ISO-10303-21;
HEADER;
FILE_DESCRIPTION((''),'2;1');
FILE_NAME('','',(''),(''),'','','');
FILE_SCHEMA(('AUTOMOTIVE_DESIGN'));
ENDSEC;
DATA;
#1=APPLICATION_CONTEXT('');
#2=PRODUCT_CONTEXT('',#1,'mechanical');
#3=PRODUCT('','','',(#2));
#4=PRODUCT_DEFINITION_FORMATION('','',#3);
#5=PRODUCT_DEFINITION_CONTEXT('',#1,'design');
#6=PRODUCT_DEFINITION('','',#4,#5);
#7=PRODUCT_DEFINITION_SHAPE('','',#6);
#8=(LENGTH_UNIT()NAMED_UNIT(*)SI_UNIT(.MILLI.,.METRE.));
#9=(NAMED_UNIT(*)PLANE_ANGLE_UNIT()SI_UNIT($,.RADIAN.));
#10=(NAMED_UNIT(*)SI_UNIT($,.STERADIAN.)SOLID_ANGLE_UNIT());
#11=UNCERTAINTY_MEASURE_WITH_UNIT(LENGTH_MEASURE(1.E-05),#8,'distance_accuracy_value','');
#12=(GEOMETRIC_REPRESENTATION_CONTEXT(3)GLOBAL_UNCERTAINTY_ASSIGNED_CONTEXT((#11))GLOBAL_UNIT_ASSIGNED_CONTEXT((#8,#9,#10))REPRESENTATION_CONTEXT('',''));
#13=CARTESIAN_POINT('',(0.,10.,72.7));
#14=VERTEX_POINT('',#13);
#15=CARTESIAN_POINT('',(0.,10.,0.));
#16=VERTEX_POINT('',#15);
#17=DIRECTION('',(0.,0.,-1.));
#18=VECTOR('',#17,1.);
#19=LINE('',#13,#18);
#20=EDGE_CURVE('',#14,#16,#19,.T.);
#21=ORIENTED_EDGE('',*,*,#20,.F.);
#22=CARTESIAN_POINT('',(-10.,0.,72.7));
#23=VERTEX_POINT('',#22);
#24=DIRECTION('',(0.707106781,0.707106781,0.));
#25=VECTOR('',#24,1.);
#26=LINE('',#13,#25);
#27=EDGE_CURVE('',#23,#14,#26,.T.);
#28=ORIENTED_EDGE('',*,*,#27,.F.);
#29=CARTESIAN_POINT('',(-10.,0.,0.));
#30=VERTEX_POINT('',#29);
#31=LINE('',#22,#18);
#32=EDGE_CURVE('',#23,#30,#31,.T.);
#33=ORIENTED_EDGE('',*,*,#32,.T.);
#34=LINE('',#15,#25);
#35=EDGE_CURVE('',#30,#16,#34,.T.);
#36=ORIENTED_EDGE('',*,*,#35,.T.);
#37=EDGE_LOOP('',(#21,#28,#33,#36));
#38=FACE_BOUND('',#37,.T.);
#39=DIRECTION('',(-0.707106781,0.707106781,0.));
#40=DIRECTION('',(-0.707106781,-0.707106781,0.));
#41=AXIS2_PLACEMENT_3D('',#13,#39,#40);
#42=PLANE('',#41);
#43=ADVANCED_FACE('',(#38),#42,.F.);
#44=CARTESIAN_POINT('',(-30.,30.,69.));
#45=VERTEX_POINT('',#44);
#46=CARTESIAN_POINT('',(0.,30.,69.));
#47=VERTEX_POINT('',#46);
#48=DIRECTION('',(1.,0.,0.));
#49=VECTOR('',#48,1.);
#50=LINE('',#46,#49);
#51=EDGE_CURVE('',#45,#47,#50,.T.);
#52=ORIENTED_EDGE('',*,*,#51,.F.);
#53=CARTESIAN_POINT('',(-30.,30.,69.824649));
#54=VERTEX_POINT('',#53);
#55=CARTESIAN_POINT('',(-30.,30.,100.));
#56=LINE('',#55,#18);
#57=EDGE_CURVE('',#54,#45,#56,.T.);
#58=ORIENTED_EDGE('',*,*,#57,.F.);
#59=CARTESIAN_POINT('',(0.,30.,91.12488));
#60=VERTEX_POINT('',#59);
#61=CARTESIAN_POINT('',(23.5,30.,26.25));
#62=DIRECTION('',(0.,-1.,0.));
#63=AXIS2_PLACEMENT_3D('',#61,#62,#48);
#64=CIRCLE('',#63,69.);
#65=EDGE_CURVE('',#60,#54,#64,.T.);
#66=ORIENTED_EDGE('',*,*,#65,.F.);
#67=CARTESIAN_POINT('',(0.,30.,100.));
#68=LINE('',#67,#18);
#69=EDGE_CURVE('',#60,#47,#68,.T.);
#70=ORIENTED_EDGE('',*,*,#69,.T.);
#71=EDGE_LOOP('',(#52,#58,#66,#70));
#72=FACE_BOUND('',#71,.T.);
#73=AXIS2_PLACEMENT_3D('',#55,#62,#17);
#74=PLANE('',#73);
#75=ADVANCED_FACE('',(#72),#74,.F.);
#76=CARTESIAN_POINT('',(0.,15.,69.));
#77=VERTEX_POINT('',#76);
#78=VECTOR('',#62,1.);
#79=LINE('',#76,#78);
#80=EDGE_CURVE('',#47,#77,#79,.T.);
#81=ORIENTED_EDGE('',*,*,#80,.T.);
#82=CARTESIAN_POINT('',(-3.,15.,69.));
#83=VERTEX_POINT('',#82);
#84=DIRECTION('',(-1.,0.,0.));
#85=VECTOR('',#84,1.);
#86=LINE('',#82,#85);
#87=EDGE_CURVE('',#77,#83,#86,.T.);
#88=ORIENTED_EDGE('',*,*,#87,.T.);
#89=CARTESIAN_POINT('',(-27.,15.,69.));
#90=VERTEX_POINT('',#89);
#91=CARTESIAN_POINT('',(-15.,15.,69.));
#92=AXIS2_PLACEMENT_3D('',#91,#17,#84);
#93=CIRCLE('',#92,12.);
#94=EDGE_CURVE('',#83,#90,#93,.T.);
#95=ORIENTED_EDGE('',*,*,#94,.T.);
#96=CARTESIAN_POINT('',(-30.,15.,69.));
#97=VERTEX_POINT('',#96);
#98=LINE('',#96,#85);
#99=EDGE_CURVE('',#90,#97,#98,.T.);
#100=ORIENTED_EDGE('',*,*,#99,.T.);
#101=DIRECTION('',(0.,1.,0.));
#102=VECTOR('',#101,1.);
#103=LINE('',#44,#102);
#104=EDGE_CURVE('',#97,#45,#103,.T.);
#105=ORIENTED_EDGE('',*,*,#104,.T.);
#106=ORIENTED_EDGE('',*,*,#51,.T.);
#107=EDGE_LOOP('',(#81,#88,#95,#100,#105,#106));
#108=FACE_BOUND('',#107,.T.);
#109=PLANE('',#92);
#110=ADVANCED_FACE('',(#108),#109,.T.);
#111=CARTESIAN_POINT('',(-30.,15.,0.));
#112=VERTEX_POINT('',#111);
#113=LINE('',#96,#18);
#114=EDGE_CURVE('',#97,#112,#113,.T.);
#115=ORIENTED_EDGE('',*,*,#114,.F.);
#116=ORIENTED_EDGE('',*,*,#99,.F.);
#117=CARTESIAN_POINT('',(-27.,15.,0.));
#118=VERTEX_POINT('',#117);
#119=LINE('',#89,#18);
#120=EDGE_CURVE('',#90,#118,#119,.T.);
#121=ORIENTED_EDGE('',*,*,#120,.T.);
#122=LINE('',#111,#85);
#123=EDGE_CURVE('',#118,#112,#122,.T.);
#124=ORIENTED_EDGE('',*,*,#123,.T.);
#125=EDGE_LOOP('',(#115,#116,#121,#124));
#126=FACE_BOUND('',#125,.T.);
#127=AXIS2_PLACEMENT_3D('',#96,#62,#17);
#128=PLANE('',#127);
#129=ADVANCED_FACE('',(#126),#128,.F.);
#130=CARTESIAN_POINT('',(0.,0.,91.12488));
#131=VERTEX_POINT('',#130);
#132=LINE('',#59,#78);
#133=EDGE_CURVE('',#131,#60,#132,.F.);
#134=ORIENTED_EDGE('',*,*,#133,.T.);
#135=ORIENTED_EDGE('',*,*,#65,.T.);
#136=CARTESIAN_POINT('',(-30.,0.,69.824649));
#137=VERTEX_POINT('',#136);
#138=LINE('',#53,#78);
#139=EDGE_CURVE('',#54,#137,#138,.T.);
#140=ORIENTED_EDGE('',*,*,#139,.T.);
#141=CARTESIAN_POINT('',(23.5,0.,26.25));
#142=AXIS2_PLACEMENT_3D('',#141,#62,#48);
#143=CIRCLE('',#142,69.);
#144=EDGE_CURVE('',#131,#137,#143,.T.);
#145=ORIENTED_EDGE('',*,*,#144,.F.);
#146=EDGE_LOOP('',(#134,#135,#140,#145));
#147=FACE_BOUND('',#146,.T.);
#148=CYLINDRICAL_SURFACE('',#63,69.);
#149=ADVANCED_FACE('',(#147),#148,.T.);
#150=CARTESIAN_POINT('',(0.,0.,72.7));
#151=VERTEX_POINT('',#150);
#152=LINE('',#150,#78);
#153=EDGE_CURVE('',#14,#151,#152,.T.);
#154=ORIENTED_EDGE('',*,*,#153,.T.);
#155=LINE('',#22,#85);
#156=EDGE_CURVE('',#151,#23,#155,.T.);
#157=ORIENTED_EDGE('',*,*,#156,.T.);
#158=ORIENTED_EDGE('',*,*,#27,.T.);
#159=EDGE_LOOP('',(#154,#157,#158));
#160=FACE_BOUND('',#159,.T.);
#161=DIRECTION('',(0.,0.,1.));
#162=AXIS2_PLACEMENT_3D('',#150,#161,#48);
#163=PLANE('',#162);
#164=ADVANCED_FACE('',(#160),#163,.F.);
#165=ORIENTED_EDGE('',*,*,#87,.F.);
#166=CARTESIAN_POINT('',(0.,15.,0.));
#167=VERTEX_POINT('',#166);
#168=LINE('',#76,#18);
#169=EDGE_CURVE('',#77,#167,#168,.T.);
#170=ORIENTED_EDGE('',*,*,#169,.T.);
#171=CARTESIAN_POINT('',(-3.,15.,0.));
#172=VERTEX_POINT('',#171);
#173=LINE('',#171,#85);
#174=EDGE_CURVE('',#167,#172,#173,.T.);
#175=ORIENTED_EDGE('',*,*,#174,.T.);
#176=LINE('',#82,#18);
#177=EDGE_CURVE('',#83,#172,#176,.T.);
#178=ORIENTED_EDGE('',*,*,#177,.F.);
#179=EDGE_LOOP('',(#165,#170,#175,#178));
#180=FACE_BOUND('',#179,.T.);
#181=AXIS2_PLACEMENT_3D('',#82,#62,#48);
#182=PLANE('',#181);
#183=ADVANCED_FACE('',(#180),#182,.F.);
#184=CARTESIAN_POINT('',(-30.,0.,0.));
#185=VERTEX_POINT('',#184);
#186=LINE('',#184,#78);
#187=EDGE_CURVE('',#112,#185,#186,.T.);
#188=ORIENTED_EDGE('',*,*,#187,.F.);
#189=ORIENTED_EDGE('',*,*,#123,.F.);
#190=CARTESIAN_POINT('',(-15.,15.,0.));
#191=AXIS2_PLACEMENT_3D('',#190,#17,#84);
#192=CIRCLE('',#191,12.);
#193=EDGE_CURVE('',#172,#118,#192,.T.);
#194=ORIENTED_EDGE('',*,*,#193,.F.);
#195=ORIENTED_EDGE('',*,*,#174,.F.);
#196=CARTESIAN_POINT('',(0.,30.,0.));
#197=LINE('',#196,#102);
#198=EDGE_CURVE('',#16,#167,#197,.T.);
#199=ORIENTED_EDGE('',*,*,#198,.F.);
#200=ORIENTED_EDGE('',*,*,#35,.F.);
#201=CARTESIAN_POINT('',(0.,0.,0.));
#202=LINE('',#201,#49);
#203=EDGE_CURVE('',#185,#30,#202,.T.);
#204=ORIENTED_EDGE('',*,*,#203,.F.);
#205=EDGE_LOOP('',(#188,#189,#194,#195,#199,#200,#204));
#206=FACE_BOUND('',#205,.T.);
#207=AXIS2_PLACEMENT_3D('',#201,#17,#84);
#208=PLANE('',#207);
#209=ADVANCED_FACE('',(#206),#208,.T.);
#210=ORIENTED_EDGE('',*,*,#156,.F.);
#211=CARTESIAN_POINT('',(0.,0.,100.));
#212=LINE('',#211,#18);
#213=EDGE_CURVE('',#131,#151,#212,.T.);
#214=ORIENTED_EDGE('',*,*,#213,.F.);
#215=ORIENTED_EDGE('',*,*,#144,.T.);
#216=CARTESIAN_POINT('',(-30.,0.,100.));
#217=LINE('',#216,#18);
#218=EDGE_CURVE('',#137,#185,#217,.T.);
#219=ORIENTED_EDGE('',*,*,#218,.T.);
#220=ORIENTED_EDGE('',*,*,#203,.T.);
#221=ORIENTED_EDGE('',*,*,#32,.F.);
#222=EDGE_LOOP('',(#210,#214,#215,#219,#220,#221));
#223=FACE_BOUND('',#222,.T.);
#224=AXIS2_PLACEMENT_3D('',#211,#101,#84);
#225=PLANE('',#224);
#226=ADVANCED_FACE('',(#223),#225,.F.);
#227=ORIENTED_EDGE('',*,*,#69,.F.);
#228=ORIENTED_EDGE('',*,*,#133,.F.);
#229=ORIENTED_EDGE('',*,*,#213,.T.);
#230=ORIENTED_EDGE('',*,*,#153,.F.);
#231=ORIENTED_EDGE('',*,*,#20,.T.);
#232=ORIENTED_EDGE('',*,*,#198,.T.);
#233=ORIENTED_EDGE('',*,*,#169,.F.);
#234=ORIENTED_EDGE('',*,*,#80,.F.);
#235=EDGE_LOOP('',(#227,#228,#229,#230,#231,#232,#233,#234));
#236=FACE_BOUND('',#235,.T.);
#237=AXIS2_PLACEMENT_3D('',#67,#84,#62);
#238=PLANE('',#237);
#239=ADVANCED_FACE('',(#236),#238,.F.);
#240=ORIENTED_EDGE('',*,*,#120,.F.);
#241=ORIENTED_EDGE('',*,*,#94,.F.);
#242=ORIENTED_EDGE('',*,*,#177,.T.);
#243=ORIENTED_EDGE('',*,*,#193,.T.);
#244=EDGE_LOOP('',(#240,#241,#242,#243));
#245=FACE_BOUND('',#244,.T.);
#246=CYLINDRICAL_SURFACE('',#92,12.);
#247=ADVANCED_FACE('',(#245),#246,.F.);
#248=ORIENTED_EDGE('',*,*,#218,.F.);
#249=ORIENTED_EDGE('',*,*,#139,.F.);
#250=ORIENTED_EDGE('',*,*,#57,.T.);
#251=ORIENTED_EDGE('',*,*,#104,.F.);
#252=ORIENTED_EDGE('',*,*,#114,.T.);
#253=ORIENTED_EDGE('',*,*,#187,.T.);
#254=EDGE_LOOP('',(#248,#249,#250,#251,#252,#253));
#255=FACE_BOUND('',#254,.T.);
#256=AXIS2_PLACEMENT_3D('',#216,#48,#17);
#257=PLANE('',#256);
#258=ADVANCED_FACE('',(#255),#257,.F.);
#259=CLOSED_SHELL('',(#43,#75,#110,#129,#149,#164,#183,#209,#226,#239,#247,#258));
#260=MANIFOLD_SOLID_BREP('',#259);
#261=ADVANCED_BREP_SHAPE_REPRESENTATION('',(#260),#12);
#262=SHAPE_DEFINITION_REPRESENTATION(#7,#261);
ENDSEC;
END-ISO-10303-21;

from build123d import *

# Parameters (mm, degrees)
SKETCH2_W           = 30
SKETCH2_H           = 30
BOSS_EXTRUDE1_DEPTH = 100
CUT_EXTRUDE1_START  = -30
CUT_EXTRUDE1_DEPTH  = 30
CUT_EXTRUDE2_DEPTH  = 69
CUT_EXTRUDE3_DEPTH  = 72.7


# Read off the part's stored shape, not the designer's step: Cut-Extrude1
with BuildPart() as part:
    # Sketch2 → Boss-Extrude1 (new body)
    with BuildSketch(Plane.XY):
        with Locations((-15, 15)):
            Rectangle(SKETCH2_W, SKETCH2_H)
    extrude(amount=BOSS_EXTRUDE1_DEPTH)

    # Cut-Extrude1 outline → Cut-Extrude1 (cut)
    with BuildSketch(Plane.XZ.offset(CUT_EXTRUDE1_START)):
        with BuildLine():
            ThreePointArc((-30, 69.824648593), (-16.445900415, 82.511221459), (0, 91.124879576))
            Line((0, 91.124879576), (0, 100))
            Line((0, 100), (-30, 100))
            Line((-30, 100), (-30, 69.824648593))
        make_face()
    extrude(amount=CUT_EXTRUDE1_DEPTH, mode=Mode.SUBTRACT)

    # Sketch4 → Cut-Extrude2 (cut)
    with BuildSketch(Plane(origin=(0, 0, 0), x_dir=(-1, 0, 0), z_dir=(0, 0, -1))):
        with BuildLine():
            Line((3, 15), (0, 15))
            Line((0, 15), (0, 30))
            Line((0, 30), (30, 30))
            Line((30, 30), (30, 15))
            Line((30, 15), (27, 15))
            ThreePointArc((27, 15), (15, 3), (3, 15))
        make_face()
    extrude(amount=-CUT_EXTRUDE2_DEPTH, mode=Mode.SUBTRACT)

    # Sketch5 → Cut-Extrude3 (cut)
    with BuildSketch(Plane(origin=(0, 0, 0), x_dir=(-1, 0, 0), z_dir=(0, 0, -1))):
        Polygon((0, 0), (0, 10), (10, 0), align=None)
    extrude(amount=-CUT_EXTRUDE3_DEPTH, mode=Mode.SUBTRACT)


solid = part.part
